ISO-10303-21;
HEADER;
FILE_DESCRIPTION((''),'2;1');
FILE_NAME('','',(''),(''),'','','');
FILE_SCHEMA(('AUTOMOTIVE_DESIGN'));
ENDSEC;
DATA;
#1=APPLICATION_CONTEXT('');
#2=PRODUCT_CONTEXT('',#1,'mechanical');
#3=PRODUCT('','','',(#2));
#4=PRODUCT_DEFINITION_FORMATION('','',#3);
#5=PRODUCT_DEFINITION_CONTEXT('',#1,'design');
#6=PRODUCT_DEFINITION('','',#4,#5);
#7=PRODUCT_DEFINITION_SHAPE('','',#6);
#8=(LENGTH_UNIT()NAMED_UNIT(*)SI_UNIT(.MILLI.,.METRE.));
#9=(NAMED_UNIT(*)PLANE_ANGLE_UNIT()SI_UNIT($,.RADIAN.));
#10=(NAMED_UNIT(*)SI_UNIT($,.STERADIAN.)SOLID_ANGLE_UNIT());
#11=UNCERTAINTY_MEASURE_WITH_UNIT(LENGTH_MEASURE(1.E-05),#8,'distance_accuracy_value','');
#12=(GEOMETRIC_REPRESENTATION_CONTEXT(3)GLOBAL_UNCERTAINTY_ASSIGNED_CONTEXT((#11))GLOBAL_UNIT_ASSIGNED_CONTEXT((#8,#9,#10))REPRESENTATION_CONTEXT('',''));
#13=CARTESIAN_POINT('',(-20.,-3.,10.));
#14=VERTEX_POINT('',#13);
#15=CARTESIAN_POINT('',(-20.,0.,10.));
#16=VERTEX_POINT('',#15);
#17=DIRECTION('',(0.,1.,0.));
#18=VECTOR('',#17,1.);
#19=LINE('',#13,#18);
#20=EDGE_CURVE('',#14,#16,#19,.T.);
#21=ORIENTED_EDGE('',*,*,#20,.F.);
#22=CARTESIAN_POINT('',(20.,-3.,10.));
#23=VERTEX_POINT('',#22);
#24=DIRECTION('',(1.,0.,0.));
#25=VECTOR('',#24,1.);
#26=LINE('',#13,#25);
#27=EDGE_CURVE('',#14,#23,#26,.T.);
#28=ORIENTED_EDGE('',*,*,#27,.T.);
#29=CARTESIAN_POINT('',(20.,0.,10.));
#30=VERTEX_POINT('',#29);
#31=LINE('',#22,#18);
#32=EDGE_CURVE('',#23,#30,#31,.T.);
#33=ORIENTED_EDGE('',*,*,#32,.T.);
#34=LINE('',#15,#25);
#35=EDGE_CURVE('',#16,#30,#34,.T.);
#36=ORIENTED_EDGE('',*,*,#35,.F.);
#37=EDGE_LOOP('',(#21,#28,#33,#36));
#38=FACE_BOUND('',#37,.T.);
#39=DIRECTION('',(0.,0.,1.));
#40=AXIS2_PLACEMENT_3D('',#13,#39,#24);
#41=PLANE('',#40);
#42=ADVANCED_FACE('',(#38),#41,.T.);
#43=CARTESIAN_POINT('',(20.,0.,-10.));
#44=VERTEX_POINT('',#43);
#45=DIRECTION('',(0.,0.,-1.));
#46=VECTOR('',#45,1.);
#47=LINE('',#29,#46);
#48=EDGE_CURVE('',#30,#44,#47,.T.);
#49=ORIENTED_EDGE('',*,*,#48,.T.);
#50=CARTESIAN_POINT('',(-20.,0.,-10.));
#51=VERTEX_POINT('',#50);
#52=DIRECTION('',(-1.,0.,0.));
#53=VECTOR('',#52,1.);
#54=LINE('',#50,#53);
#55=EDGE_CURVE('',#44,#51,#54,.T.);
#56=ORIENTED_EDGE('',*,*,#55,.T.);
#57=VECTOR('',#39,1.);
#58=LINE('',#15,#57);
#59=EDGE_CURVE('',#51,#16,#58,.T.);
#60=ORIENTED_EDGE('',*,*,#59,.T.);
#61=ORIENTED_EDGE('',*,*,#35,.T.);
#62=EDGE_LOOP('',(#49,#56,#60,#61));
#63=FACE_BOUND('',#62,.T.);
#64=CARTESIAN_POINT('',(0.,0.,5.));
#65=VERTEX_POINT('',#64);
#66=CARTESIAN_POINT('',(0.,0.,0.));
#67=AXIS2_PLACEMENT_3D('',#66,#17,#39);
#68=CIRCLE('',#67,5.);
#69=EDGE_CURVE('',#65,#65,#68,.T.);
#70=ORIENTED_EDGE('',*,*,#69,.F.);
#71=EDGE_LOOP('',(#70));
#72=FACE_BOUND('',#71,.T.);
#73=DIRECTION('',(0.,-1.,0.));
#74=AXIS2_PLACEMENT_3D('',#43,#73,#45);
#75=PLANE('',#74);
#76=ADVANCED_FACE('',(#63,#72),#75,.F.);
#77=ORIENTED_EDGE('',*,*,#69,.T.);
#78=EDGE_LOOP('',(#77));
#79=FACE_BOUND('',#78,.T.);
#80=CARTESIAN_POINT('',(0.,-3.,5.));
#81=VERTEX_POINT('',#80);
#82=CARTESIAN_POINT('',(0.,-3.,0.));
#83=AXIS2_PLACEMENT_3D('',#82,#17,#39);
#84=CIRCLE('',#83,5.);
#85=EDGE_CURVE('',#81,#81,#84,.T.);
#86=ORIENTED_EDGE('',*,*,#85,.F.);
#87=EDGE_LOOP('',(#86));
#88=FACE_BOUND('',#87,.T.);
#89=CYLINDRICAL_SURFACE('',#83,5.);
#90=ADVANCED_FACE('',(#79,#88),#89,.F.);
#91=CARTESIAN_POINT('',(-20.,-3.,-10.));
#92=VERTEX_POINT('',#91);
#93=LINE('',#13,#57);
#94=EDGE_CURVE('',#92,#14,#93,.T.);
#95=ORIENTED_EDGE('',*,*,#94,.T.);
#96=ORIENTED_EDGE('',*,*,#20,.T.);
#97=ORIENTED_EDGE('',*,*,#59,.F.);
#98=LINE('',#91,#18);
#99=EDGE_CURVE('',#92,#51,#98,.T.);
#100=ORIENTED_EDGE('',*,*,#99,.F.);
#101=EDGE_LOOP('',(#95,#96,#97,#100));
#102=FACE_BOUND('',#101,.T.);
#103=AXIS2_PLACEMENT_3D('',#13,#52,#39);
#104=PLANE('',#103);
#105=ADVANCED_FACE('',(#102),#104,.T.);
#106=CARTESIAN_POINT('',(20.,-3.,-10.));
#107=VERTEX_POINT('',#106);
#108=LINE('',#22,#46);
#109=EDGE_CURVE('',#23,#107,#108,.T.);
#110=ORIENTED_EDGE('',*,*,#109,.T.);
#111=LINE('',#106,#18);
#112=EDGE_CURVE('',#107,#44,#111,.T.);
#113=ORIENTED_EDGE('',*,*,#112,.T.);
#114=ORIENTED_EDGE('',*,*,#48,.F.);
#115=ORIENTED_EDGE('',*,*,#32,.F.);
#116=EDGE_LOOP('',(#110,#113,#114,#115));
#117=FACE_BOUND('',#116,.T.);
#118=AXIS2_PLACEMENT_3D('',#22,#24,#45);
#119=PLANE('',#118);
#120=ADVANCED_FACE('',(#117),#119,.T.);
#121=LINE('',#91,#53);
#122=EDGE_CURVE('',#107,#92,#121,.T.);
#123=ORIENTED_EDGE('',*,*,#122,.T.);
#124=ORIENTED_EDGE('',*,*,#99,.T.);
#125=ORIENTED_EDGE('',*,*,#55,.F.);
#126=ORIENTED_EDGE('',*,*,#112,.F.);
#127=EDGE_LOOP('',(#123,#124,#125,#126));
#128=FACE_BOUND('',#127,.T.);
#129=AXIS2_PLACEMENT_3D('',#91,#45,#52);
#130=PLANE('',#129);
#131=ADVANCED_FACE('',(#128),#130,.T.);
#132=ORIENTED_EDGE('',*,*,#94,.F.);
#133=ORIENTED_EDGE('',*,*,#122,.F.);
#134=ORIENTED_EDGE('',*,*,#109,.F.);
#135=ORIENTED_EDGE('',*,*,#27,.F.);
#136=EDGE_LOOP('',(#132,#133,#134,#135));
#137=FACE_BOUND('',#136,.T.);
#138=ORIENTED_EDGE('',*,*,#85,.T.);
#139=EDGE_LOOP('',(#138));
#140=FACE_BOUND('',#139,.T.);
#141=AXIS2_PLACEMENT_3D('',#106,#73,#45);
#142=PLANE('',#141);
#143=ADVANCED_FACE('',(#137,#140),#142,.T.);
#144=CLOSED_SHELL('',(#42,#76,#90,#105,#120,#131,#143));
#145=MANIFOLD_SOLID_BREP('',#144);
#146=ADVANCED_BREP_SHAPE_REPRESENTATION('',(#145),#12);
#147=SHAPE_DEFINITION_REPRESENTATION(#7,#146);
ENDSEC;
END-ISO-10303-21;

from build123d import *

# Parameters (mm, degrees)
CROQUIS1_W            = 40
CROQUIS1_H            = 20
BRIDA_BASE1_DEPTH     = 3
CROQUIS5_R            = 5
CORTAR_EXTRUIR1_DEPTH = 23.561028345


# Sheet-metal steps are written as plain solids
with BuildPart() as part:
    # Croquis1 → Brida base1 (new body)
    with BuildSketch(Plane(origin=(0, 0, 0), x_dir=(1, 0, 0), z_dir=(0, 1, 0))):
        Rectangle(CROQUIS1_W, CROQUIS1_H)
    extrude(amount=-BRIDA_BASE1_DEPTH)

    # Croquis5 → Cortar-Extruir1 (cut, through all)
    with BuildSketch(Plane(origin=(0, 0, 0), x_dir=(1, 0, 0), z_dir=(0, 1, 0))):
        with Locations(Location((0, 0, 0), (0, 0, 270))):
            Circle(CROQUIS5_R)
    extrude(amount=-CORTAR_EXTRUIR1_DEPTH, mode=Mode.SUBTRACT)


solid = part.part
